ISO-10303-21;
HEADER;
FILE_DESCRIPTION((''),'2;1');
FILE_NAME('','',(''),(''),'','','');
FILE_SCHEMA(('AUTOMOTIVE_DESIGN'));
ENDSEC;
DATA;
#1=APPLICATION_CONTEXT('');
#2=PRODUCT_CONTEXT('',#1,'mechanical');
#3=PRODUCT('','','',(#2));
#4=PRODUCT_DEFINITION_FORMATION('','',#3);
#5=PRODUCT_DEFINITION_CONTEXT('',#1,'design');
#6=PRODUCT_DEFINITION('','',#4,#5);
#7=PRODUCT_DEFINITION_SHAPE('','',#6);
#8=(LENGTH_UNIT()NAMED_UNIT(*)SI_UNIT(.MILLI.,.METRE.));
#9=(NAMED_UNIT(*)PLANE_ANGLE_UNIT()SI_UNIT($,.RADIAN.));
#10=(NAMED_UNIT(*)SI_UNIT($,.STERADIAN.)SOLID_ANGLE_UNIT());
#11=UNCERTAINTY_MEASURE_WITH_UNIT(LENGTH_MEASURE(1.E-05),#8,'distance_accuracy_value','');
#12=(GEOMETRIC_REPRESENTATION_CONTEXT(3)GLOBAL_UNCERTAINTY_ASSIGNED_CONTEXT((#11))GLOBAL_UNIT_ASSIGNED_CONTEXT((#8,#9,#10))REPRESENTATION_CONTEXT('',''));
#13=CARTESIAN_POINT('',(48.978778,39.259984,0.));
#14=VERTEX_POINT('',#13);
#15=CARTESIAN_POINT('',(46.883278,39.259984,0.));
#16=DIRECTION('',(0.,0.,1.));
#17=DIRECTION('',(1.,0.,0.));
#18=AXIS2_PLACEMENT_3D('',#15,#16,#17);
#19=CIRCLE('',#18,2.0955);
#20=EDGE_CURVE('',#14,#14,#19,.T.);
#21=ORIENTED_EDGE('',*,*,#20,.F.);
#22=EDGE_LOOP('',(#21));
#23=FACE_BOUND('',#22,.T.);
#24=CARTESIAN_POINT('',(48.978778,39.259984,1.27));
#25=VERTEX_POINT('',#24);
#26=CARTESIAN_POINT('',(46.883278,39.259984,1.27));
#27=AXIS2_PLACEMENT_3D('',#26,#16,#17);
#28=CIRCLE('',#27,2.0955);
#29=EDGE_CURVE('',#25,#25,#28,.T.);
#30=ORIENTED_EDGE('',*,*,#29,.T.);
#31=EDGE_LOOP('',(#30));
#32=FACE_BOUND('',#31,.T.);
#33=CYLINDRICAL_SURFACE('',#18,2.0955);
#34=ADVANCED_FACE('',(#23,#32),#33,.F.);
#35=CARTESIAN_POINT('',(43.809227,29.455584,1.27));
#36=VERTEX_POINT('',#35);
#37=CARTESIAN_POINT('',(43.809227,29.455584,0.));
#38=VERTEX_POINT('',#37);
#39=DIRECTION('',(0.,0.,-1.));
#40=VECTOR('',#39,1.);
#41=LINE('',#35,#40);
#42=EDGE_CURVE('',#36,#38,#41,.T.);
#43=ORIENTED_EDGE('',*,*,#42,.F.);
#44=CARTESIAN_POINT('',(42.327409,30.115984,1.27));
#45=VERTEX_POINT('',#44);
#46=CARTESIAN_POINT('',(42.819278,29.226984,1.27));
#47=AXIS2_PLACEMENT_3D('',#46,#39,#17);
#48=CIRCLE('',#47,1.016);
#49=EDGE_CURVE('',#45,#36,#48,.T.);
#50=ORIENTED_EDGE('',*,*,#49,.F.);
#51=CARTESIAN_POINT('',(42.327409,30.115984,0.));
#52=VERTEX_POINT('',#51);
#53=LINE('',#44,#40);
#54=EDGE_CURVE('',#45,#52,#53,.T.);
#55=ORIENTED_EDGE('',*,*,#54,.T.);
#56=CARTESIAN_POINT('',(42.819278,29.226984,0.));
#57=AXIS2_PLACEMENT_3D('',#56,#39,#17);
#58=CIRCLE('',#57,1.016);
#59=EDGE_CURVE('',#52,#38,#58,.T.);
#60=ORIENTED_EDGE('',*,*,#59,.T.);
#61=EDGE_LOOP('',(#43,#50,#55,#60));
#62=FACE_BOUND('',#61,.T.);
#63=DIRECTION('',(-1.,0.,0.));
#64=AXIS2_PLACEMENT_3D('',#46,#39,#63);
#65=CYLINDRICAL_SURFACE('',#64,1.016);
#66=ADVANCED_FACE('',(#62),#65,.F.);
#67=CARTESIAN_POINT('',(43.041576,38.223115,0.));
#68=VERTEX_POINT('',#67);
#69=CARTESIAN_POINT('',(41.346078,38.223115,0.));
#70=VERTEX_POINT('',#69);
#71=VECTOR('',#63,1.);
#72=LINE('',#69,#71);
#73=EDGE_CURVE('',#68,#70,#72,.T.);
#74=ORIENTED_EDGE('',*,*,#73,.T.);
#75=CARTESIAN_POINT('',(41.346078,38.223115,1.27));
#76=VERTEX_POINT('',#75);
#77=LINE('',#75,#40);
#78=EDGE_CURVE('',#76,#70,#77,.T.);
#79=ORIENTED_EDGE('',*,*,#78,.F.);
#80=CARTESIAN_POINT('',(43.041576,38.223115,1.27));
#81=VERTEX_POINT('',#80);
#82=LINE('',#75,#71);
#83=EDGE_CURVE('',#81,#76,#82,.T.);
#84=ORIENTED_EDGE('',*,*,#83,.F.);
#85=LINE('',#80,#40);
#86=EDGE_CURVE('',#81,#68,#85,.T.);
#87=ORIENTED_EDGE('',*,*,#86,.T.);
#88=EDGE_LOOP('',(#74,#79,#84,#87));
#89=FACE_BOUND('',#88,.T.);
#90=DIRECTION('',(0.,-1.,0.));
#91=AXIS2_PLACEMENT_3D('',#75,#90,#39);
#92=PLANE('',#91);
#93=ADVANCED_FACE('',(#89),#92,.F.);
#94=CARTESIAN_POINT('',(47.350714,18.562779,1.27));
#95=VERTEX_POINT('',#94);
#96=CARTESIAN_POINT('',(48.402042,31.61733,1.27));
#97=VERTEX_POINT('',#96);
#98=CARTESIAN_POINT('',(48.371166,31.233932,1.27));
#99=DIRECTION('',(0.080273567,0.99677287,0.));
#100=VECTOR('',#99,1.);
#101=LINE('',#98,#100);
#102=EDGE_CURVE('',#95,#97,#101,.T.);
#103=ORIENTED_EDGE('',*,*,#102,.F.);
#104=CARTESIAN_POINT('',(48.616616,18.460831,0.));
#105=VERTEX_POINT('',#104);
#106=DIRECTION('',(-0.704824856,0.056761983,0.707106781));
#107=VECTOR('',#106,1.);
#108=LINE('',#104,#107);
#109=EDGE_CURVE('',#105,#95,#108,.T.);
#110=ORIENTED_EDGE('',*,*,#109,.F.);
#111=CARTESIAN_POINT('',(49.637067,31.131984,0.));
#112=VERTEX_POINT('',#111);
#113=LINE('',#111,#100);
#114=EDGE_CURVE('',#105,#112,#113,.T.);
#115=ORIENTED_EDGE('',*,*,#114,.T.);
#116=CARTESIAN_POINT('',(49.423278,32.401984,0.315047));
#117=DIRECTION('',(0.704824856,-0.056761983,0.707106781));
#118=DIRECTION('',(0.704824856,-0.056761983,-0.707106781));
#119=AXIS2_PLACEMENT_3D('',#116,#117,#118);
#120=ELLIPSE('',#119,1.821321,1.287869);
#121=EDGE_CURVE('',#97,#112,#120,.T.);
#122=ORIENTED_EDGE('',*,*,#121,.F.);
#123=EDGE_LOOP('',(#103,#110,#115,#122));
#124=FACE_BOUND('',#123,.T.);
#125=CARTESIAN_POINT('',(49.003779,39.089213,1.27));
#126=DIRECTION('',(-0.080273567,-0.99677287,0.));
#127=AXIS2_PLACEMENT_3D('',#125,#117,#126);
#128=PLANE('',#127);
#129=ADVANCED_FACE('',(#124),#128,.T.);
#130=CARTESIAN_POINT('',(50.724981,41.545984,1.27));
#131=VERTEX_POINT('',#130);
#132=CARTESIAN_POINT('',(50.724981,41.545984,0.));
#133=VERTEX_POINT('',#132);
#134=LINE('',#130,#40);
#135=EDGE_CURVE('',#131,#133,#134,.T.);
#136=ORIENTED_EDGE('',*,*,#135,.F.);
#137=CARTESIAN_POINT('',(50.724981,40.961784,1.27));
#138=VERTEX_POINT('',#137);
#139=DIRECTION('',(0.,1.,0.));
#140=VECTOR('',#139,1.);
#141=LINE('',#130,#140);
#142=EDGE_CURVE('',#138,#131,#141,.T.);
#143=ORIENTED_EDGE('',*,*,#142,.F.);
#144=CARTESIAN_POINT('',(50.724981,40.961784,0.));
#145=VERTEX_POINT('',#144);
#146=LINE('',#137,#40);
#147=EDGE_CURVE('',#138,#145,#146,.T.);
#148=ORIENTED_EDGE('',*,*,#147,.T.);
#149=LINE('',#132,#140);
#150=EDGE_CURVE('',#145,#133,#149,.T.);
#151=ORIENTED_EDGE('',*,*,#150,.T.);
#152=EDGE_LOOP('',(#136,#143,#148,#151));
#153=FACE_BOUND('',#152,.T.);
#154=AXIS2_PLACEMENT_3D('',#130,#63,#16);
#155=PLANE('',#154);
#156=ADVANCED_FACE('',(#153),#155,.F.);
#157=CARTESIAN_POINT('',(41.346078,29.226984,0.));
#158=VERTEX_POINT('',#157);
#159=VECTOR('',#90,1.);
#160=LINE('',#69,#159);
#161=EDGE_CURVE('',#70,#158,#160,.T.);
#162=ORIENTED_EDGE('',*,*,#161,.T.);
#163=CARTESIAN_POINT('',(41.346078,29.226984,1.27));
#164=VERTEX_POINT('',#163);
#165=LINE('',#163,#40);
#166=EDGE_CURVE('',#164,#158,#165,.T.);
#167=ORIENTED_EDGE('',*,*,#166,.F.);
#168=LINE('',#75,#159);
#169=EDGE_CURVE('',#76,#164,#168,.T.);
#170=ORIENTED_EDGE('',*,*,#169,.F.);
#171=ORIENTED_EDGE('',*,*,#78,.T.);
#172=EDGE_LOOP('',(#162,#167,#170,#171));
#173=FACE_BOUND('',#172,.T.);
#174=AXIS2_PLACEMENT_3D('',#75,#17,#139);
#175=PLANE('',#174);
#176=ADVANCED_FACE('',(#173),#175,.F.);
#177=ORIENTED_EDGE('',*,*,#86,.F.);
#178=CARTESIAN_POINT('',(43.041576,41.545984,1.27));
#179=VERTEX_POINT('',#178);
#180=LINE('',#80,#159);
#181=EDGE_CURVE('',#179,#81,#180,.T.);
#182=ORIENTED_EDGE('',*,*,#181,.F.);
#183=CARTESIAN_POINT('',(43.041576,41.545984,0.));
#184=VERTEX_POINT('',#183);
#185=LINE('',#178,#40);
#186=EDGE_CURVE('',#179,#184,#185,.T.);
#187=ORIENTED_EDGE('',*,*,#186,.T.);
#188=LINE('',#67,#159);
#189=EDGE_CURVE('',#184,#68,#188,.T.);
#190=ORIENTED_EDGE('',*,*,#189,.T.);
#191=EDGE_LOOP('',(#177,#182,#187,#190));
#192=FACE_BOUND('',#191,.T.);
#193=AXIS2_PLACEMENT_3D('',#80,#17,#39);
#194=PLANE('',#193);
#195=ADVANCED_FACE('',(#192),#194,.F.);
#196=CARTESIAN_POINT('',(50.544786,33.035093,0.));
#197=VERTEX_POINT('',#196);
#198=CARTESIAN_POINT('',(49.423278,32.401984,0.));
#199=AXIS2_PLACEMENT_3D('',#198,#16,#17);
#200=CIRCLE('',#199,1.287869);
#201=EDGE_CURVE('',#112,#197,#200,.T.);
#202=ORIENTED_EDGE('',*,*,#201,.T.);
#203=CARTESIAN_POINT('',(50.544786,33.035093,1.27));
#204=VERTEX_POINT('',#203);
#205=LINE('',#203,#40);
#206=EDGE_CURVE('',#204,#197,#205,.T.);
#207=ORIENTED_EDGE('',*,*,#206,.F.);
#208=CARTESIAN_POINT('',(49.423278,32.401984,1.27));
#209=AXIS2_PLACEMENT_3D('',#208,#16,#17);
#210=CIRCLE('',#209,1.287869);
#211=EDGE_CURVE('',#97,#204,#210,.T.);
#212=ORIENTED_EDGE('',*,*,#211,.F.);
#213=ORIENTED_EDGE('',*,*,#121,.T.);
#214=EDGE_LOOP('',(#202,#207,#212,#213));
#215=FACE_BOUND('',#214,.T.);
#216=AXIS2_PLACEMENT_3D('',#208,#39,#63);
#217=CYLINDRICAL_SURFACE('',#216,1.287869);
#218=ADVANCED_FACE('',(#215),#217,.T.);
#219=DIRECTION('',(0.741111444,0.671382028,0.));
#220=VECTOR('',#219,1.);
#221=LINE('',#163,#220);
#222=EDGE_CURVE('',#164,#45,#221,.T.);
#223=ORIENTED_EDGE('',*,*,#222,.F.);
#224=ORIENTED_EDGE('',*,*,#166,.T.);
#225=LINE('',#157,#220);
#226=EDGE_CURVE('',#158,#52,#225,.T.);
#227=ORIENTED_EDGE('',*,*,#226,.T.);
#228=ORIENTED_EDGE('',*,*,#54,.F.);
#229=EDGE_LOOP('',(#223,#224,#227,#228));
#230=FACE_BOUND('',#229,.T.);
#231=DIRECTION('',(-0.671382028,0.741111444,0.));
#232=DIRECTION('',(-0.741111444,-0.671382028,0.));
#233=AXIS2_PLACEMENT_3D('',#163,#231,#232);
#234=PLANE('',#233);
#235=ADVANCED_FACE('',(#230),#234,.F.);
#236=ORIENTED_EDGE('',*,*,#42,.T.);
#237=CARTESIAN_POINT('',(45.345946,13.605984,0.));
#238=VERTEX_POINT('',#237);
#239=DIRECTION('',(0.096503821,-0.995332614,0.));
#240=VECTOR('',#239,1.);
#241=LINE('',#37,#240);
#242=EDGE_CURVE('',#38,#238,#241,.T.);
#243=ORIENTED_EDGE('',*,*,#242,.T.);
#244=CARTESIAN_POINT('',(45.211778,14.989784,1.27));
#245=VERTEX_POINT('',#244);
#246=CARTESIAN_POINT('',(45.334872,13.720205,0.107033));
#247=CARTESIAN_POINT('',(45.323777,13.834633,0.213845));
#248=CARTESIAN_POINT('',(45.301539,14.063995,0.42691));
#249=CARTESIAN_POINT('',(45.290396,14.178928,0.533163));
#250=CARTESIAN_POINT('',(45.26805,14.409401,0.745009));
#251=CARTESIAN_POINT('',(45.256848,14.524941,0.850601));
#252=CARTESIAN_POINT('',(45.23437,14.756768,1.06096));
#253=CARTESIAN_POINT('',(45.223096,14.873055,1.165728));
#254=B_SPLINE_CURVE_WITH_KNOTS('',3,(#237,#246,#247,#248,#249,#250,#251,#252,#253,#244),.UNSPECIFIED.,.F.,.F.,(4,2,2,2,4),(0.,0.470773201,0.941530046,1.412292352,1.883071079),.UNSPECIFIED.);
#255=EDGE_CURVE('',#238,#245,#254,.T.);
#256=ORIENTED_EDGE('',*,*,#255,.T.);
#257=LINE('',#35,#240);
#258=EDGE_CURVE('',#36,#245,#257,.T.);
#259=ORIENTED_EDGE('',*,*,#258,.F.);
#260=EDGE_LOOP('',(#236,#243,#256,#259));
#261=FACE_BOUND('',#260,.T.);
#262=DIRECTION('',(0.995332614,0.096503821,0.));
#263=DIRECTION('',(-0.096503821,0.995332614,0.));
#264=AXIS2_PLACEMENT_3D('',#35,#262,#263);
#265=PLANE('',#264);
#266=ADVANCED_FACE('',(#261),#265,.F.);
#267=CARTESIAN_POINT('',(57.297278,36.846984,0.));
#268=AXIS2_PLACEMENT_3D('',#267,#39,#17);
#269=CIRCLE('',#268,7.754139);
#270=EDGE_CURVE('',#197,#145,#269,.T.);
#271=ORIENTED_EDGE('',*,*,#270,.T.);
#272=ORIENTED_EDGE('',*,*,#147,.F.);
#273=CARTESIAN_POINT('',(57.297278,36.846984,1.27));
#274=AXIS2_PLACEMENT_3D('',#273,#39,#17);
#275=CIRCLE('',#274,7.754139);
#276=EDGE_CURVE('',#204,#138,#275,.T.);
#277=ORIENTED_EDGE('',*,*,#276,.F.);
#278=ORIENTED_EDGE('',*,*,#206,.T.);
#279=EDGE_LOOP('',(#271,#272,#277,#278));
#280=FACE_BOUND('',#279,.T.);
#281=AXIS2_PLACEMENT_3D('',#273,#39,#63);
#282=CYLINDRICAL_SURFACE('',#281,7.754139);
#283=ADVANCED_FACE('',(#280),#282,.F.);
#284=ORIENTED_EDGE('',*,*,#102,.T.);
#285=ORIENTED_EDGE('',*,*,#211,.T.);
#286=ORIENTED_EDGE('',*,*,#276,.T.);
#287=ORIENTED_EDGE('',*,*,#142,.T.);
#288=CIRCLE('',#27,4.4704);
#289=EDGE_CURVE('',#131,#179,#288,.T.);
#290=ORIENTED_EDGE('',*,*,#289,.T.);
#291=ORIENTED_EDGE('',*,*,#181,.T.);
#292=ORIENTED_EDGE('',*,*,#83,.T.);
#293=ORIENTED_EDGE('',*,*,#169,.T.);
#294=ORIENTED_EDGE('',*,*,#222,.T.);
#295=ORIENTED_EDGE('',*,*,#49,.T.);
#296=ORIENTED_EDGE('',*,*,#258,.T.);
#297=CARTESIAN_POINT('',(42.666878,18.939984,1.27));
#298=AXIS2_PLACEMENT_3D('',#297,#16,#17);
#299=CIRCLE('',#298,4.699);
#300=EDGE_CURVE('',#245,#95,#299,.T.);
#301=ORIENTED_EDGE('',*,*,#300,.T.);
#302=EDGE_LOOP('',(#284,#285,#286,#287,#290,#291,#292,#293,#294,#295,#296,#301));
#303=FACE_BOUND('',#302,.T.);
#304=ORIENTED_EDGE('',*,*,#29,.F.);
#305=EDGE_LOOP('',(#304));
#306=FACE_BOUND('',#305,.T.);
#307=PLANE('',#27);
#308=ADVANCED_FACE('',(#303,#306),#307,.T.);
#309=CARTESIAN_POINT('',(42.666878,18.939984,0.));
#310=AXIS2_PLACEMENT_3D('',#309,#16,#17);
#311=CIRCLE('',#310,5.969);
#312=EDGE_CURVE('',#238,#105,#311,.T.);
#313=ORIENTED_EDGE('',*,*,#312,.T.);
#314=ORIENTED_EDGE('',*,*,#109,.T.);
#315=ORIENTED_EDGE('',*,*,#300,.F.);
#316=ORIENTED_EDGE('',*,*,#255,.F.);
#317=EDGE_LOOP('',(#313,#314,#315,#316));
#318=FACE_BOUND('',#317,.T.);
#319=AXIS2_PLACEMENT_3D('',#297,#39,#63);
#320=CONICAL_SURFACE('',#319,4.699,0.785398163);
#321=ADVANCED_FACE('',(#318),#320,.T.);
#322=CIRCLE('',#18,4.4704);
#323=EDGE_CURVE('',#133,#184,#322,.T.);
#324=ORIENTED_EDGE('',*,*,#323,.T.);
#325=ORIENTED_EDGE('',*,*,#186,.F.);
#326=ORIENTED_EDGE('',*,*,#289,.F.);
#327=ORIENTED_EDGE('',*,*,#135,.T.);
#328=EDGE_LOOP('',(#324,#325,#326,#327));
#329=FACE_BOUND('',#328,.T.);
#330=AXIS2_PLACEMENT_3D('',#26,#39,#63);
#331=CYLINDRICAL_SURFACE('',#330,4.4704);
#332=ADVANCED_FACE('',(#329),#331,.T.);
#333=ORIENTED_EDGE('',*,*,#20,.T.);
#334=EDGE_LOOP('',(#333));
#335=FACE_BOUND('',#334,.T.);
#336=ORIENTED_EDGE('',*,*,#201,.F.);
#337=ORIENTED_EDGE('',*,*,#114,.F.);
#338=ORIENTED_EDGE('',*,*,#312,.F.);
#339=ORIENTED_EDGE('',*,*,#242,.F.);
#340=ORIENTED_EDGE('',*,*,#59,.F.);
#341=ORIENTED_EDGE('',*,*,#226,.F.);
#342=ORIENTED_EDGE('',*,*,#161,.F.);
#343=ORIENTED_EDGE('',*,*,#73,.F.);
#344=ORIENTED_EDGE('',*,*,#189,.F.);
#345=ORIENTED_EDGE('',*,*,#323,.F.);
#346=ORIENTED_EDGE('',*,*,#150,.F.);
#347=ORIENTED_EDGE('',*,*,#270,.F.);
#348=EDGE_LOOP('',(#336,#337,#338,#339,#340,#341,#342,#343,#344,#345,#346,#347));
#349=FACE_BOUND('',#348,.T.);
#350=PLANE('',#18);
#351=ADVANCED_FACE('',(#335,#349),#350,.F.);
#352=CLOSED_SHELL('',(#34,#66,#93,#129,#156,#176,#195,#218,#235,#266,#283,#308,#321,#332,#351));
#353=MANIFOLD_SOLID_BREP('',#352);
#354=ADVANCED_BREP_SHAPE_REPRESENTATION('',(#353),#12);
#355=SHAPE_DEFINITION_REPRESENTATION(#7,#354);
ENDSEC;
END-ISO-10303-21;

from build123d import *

# Parameters (mm, degrees)
BOSS_EXTRUDE1_DEPTH = 1.27
SKETCH2_R           = 2.0955
CUT_EXTRUDE1_DEPTH  = 67.984946971
CHAMFER1_SIZE       = 1.27


with BuildPart() as part:
    # Sketch1 → Boss-Extrude1 (new body)
    with BuildSketch(Plane.XY):
        with BuildLine():
            Line((41.346078307, 38.223115267), (41.346078307, 29.226984353))
            Line((41.346078307, 29.226984353), (42.327409422, 30.115984353))
            ThreePointArc((42.327409422, 30.115984353), (43.232863688, 30.154994662), (43.809226811, 29.455584353))
            Line((43.809226811, 29.455584353), (45.345946242, 13.605984353))
            ThreePointArc((45.345946242, 13.605984353), (47.617277769, 15.604942198), (48.616615569, 18.460831434))
            Line((48.616615569, 18.460831434), (49.637067337, 31.131984353))
            ThreePointArc((49.637067337, 31.131984353), (50.585693925, 31.847551598), (50.544785665, 33.035093345))
            ThreePointArc((50.544785665, 33.035093345), (49.545142222, 37.023211652), (50.724981076, 40.961784353))
            Line((50.724981076, 40.961784353), (50.724981076, 41.545984353))
            ThreePointArc((50.724981076, 41.545984353), (46.883278307, 43.730384353), (43.041575539, 41.545984353))
            Line((43.041575539, 41.545984353), (43.041575539, 38.223115267))
            Line((43.041575539, 38.223115267), (41.346078307, 38.223115267))
        make_face()
    extrude(amount=BOSS_EXTRUDE1_DEPTH)

    # Sketch2 → Cut-Extrude1 (cut, through all)
    with BuildSketch(Plane.XY.offset(1.27)):
        with Locations((46.883278307, 39.259984353)):
            Circle(SKETCH2_R)
    extrude(amount=-CUT_EXTRUDE1_DEPTH, mode=Mode.SUBTRACT)

    # Chamfer1
    chamfer1_edges = [part.edges().sort_by_distance(p)[0] for p in [
        (47.617277769, 15.604942198, 1.27),
        (49.126841453, 24.796407893, 1.27),
    ]]
    chamfer(chamfer1_edges, length=CHAMFER1_SIZE - 0.0001)  # a hair under: the kernel refuses the full size


solid = part.part
